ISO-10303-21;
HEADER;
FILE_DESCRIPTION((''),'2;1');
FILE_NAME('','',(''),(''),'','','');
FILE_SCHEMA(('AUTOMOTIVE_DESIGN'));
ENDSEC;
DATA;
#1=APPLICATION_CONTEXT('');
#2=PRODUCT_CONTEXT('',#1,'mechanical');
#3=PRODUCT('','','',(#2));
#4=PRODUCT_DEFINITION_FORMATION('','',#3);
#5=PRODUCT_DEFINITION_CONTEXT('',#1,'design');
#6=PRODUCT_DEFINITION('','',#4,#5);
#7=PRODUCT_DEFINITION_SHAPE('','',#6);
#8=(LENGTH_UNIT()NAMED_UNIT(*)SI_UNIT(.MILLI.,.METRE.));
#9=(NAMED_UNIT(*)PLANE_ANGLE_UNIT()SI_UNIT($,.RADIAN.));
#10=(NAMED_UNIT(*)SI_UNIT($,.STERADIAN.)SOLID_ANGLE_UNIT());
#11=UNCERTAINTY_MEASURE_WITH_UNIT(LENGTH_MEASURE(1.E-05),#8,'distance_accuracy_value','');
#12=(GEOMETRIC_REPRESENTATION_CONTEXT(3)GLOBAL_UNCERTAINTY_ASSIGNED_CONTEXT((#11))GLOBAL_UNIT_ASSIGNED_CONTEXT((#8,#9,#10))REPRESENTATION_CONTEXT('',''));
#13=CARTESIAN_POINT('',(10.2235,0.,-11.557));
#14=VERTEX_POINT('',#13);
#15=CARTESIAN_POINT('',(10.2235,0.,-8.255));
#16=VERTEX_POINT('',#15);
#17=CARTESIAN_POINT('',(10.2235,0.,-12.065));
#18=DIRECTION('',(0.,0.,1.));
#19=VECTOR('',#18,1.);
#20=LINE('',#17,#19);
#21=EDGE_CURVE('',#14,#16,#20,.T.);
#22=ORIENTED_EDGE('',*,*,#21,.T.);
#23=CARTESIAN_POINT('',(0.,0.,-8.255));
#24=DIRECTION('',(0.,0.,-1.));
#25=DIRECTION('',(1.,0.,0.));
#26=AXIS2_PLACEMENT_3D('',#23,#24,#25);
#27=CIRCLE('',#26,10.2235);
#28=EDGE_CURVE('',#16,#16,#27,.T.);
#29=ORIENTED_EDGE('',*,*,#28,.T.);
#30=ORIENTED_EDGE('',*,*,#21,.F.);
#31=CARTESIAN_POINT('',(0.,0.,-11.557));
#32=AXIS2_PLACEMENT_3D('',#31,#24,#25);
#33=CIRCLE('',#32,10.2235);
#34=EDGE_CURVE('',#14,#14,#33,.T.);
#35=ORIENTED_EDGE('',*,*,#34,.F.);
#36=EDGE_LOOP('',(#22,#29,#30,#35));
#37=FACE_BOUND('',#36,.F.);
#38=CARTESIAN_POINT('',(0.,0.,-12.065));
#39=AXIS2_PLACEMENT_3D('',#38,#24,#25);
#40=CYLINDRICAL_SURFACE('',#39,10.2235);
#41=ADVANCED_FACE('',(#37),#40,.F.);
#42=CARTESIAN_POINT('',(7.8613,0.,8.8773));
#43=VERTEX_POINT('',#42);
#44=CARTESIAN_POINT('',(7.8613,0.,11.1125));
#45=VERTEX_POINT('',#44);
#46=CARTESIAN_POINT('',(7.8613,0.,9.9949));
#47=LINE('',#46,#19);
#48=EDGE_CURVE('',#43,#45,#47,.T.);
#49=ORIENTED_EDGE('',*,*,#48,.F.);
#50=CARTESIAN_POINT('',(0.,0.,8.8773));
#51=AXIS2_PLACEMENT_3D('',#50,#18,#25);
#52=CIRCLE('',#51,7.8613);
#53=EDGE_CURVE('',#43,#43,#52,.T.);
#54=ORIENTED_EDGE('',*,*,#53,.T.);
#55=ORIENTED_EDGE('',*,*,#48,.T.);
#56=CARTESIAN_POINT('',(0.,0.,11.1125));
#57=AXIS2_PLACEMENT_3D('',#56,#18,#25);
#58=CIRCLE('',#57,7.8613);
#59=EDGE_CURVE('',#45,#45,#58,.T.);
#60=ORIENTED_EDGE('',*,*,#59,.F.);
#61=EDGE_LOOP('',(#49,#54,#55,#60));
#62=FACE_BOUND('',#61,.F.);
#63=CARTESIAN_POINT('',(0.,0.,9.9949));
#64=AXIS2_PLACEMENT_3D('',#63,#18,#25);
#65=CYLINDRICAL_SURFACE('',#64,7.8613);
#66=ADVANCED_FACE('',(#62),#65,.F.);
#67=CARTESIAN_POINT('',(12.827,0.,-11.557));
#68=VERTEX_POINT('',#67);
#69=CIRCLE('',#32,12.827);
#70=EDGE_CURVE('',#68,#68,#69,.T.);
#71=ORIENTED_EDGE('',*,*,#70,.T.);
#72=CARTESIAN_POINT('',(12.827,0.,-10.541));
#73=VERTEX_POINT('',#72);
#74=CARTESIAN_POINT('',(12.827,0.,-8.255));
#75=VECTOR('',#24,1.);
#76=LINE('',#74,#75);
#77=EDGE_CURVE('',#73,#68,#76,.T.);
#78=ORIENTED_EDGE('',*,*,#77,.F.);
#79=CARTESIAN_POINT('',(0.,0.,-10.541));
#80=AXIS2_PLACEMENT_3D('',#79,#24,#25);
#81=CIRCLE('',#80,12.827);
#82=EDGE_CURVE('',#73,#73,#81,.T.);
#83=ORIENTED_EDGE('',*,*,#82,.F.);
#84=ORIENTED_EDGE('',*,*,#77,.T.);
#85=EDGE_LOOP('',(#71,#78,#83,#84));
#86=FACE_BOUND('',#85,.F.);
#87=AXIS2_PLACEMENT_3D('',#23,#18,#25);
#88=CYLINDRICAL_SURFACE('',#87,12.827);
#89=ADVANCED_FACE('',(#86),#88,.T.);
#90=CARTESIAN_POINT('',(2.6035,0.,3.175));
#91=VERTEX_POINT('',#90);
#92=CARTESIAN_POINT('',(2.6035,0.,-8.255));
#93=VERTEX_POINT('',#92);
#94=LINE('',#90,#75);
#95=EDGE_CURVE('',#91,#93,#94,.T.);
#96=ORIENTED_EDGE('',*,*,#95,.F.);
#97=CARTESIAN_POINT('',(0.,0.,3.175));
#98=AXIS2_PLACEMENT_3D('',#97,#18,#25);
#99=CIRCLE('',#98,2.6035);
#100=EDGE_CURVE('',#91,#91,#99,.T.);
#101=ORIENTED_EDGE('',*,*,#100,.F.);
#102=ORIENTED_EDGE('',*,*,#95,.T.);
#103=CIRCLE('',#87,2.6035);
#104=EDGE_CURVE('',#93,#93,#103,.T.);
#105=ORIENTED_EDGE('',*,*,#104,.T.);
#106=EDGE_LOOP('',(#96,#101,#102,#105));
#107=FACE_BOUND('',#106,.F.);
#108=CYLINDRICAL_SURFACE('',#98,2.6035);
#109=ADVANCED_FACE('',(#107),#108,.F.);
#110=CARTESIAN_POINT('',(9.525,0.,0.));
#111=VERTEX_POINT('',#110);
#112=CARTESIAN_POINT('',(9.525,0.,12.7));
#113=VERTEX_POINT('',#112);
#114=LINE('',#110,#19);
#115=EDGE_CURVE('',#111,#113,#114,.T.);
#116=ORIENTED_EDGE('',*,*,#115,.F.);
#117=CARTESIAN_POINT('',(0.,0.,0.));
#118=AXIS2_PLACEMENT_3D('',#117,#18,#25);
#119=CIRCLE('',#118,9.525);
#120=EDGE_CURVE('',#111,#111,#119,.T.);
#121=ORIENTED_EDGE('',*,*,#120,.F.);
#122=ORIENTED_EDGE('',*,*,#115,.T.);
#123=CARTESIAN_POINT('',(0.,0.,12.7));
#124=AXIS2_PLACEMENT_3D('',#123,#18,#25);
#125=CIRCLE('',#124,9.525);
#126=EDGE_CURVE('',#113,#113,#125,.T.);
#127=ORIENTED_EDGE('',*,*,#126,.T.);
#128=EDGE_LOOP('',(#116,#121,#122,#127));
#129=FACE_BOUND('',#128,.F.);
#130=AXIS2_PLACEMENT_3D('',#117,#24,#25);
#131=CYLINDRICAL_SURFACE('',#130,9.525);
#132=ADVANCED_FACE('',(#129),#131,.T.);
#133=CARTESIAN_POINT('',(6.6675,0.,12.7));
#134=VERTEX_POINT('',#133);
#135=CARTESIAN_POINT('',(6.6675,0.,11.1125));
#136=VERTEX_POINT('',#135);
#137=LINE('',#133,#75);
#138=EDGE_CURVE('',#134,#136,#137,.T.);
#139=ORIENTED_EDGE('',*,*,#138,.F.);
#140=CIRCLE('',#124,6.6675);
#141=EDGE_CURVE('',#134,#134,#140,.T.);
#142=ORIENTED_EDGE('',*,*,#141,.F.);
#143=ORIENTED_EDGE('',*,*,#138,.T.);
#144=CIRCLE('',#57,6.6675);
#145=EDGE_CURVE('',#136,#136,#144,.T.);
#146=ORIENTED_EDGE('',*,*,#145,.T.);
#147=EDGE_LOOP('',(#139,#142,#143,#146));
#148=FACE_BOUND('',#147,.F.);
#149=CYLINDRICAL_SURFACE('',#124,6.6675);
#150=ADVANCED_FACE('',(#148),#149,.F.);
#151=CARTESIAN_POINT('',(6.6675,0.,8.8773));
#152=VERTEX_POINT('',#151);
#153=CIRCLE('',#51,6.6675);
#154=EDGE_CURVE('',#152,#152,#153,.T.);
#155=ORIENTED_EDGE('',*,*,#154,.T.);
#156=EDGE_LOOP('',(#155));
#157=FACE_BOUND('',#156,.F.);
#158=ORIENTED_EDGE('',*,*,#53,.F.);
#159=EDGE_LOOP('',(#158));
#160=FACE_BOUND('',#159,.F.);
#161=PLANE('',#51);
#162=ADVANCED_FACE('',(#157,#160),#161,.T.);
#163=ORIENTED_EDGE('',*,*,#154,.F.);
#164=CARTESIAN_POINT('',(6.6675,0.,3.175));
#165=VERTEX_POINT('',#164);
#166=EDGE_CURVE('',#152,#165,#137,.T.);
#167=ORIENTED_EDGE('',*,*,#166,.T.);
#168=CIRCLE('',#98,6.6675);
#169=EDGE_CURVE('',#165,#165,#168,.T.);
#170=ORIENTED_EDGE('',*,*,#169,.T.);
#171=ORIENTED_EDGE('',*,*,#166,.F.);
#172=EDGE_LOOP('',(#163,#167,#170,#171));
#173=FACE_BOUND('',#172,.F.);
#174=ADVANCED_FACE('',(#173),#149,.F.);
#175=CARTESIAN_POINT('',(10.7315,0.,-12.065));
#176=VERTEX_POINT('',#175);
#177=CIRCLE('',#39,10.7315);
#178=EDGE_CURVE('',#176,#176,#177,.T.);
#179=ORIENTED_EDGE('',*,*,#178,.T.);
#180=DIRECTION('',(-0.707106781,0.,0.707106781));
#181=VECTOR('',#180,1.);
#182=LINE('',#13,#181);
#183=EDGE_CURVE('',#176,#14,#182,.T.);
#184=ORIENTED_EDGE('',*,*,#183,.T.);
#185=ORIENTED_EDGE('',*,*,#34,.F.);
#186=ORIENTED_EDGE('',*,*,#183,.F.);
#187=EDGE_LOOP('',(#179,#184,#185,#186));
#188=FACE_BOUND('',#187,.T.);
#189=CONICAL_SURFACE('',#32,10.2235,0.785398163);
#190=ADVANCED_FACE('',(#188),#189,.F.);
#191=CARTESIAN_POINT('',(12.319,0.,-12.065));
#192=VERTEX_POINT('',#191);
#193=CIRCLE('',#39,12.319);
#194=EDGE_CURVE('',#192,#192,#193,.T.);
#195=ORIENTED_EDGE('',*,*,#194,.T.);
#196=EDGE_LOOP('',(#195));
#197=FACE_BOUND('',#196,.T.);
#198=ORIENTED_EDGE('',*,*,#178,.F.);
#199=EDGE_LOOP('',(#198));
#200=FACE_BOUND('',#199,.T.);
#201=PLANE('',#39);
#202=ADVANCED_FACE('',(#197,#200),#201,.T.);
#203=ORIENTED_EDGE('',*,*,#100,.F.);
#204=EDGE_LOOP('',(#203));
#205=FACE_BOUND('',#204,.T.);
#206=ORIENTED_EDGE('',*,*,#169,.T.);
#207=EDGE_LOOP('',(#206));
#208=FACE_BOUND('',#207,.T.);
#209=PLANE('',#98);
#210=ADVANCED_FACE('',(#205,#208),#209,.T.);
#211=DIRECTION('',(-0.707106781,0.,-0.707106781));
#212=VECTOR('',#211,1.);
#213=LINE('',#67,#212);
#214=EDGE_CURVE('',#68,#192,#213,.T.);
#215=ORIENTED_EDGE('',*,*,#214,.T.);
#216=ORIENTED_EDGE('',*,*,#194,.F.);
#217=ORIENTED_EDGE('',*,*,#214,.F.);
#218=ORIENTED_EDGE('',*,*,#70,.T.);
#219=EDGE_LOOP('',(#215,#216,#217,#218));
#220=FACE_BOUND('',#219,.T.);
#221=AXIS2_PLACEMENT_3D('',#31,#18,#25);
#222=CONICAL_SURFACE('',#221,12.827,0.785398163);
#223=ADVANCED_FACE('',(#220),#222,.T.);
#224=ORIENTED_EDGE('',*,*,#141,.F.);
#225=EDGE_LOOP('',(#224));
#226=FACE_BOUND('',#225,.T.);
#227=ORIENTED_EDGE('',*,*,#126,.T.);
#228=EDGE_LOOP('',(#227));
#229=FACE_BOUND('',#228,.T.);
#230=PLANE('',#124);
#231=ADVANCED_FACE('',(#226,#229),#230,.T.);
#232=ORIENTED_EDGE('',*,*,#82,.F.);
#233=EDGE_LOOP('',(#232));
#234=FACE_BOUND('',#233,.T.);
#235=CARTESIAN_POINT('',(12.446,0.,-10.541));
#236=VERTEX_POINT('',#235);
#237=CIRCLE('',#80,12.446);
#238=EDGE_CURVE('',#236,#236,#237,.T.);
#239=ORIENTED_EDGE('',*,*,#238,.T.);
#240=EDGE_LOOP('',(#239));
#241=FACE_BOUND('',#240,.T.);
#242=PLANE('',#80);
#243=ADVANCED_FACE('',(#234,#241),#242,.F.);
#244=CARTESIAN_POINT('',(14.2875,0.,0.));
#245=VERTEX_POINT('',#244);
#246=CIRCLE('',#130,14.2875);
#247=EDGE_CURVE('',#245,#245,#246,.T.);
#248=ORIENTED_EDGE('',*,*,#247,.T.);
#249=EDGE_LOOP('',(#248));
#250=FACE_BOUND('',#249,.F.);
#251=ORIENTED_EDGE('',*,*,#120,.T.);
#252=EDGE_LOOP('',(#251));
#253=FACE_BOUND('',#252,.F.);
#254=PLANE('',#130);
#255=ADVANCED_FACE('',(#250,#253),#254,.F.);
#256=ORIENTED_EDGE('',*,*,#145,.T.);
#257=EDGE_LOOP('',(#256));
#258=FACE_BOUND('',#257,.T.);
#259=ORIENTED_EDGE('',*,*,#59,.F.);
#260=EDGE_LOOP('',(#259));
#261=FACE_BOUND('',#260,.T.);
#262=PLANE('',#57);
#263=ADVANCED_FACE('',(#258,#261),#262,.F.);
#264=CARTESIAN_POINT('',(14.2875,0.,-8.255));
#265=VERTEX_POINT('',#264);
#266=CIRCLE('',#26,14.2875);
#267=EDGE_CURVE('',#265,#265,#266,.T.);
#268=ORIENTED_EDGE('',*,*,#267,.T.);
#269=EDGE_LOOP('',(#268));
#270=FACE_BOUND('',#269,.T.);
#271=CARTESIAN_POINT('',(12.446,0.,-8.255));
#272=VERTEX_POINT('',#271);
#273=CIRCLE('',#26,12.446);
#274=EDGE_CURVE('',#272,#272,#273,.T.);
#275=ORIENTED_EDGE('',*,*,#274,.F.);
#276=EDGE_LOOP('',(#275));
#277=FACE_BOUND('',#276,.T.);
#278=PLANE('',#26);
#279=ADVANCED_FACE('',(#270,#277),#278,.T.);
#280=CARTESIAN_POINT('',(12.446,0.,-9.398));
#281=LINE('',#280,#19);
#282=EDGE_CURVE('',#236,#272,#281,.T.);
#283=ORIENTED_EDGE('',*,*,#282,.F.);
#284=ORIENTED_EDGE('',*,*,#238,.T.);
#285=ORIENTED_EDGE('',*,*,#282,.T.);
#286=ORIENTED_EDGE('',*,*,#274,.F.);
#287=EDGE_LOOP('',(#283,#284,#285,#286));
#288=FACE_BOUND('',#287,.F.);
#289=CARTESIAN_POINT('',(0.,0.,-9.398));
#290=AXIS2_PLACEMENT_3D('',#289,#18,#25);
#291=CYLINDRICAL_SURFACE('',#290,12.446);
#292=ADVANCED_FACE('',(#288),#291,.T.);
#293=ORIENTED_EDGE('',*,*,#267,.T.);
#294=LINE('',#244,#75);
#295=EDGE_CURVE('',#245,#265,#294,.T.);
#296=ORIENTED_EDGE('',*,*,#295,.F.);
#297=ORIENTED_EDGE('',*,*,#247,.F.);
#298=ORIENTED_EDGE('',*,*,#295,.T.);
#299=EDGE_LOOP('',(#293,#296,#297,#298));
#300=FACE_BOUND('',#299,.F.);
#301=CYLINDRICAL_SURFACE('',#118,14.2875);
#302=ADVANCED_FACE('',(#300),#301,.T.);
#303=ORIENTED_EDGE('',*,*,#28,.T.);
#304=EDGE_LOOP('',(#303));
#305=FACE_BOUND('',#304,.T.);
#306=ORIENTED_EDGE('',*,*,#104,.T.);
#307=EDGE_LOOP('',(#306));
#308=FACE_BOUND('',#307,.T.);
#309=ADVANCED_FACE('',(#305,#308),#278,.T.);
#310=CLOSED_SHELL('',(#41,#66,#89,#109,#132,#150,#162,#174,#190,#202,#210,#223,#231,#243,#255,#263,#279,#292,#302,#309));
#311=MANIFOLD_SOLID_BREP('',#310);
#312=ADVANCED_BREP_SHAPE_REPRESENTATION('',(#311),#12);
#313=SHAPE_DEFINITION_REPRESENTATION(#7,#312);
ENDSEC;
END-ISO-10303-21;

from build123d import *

# Parameters (mm, degrees)
F0_R           = 9.525
F1_DEPTH       = 12.7
F2_R           = 6.6675
F3_DEPTH       = 9.525
F4_W           = 1.1938
F4_H           = 2.2352
F6_R           = 14.2875
F6_R_2         = 9.525
F7_DEPTH       = 8.255
F8_R           = 12.827
F9_DEPTH       = 3.81
F10_R          = 10.2235
F11_DEPTH      = 3.81
F12_W          = 0.381
F12_H          = 2.286
F14_R          = 2.6035
F15_DEPTH      = 25.4
F15_DEPTH_BACK = 25.4
F16_SIZE       = 0.508


with BuildPart() as f1:
    # F0 (on Top) → F1 (new body)
    with BuildSketch(Plane.XY):
        Circle(F0_R)
    extrude(amount=F1_DEPTH)

    # F2 (on face) → F3 (cut)
    with BuildSketch(Plane.XY.offset(12.7)):
        Circle(F2_R)
    extrude(amount=-F3_DEPTH, mode=Mode.SUBTRACT)

    # F4 (on Front) → F5 (revolve, cut)
    with BuildSketch(Plane.XZ):
        with Locations((7.2644, 9.9949)):
            Rectangle(F4_W, F4_H)
    revolve(axis=Axis((0, 0, 19.0221574157), (0, 0, 1)), mode=Mode.SUBTRACT)

    # F6 (on face) → F7 (join)
    with BuildSketch(Plane(origin=(0, 0, 0), x_dir=(1, 0, 0), z_dir=(0, 0, -1))):
        Circle(F6_R)
        Circle(F6_R_2, mode=Mode.SUBTRACT)
        Circle(F6_R_2)
    extrude(amount=F7_DEPTH)

    # F8 (on face) → F9 (join)
    with BuildSketch(Plane(origin=(0, 0, -8.255), x_dir=(1, 0, 0), z_dir=(0, 0, -1))):
        Circle(F8_R)
    extrude(amount=F9_DEPTH)

    # F10 (on face) → F11 (cut)
    with BuildSketch(Plane(origin=(0, 0, -12.065), x_dir=(1, 0, 0), z_dir=(0, 0, -1))):
        Circle(F10_R)
    extrude(amount=-F11_DEPTH, mode=Mode.SUBTRACT)

    # F12 (on Front) → F13 (revolve, cut)
    with BuildSketch(Plane.XZ):
        with Locations((12.6365, -9.398)):
            Rectangle(F12_W, F12_H)
    revolve(axis=Axis((0, 0, -8.9314272627), (0, 0, -1)), mode=Mode.SUBTRACT)

    # F14 (on face) → F15 (cut, two sides)
    with BuildSketch(Plane.XY.offset(3.175)) as f15_sk:
        Circle(F14_R)
    extrude(amount=-F15_DEPTH, mode=Mode.SUBTRACT)
    extrude(f15_sk.sketch, amount=F15_DEPTH_BACK, mode=Mode.SUBTRACT)

    # F16
    f16_edges = [f1.edges().sort_by_distance(p)[0] for p in [
        (-10.2235, 0, -12.065),
        (-12.827, 0, -12.065),
    ]]
    chamfer(f16_edges, length=F16_SIZE)


solid = f1.part
